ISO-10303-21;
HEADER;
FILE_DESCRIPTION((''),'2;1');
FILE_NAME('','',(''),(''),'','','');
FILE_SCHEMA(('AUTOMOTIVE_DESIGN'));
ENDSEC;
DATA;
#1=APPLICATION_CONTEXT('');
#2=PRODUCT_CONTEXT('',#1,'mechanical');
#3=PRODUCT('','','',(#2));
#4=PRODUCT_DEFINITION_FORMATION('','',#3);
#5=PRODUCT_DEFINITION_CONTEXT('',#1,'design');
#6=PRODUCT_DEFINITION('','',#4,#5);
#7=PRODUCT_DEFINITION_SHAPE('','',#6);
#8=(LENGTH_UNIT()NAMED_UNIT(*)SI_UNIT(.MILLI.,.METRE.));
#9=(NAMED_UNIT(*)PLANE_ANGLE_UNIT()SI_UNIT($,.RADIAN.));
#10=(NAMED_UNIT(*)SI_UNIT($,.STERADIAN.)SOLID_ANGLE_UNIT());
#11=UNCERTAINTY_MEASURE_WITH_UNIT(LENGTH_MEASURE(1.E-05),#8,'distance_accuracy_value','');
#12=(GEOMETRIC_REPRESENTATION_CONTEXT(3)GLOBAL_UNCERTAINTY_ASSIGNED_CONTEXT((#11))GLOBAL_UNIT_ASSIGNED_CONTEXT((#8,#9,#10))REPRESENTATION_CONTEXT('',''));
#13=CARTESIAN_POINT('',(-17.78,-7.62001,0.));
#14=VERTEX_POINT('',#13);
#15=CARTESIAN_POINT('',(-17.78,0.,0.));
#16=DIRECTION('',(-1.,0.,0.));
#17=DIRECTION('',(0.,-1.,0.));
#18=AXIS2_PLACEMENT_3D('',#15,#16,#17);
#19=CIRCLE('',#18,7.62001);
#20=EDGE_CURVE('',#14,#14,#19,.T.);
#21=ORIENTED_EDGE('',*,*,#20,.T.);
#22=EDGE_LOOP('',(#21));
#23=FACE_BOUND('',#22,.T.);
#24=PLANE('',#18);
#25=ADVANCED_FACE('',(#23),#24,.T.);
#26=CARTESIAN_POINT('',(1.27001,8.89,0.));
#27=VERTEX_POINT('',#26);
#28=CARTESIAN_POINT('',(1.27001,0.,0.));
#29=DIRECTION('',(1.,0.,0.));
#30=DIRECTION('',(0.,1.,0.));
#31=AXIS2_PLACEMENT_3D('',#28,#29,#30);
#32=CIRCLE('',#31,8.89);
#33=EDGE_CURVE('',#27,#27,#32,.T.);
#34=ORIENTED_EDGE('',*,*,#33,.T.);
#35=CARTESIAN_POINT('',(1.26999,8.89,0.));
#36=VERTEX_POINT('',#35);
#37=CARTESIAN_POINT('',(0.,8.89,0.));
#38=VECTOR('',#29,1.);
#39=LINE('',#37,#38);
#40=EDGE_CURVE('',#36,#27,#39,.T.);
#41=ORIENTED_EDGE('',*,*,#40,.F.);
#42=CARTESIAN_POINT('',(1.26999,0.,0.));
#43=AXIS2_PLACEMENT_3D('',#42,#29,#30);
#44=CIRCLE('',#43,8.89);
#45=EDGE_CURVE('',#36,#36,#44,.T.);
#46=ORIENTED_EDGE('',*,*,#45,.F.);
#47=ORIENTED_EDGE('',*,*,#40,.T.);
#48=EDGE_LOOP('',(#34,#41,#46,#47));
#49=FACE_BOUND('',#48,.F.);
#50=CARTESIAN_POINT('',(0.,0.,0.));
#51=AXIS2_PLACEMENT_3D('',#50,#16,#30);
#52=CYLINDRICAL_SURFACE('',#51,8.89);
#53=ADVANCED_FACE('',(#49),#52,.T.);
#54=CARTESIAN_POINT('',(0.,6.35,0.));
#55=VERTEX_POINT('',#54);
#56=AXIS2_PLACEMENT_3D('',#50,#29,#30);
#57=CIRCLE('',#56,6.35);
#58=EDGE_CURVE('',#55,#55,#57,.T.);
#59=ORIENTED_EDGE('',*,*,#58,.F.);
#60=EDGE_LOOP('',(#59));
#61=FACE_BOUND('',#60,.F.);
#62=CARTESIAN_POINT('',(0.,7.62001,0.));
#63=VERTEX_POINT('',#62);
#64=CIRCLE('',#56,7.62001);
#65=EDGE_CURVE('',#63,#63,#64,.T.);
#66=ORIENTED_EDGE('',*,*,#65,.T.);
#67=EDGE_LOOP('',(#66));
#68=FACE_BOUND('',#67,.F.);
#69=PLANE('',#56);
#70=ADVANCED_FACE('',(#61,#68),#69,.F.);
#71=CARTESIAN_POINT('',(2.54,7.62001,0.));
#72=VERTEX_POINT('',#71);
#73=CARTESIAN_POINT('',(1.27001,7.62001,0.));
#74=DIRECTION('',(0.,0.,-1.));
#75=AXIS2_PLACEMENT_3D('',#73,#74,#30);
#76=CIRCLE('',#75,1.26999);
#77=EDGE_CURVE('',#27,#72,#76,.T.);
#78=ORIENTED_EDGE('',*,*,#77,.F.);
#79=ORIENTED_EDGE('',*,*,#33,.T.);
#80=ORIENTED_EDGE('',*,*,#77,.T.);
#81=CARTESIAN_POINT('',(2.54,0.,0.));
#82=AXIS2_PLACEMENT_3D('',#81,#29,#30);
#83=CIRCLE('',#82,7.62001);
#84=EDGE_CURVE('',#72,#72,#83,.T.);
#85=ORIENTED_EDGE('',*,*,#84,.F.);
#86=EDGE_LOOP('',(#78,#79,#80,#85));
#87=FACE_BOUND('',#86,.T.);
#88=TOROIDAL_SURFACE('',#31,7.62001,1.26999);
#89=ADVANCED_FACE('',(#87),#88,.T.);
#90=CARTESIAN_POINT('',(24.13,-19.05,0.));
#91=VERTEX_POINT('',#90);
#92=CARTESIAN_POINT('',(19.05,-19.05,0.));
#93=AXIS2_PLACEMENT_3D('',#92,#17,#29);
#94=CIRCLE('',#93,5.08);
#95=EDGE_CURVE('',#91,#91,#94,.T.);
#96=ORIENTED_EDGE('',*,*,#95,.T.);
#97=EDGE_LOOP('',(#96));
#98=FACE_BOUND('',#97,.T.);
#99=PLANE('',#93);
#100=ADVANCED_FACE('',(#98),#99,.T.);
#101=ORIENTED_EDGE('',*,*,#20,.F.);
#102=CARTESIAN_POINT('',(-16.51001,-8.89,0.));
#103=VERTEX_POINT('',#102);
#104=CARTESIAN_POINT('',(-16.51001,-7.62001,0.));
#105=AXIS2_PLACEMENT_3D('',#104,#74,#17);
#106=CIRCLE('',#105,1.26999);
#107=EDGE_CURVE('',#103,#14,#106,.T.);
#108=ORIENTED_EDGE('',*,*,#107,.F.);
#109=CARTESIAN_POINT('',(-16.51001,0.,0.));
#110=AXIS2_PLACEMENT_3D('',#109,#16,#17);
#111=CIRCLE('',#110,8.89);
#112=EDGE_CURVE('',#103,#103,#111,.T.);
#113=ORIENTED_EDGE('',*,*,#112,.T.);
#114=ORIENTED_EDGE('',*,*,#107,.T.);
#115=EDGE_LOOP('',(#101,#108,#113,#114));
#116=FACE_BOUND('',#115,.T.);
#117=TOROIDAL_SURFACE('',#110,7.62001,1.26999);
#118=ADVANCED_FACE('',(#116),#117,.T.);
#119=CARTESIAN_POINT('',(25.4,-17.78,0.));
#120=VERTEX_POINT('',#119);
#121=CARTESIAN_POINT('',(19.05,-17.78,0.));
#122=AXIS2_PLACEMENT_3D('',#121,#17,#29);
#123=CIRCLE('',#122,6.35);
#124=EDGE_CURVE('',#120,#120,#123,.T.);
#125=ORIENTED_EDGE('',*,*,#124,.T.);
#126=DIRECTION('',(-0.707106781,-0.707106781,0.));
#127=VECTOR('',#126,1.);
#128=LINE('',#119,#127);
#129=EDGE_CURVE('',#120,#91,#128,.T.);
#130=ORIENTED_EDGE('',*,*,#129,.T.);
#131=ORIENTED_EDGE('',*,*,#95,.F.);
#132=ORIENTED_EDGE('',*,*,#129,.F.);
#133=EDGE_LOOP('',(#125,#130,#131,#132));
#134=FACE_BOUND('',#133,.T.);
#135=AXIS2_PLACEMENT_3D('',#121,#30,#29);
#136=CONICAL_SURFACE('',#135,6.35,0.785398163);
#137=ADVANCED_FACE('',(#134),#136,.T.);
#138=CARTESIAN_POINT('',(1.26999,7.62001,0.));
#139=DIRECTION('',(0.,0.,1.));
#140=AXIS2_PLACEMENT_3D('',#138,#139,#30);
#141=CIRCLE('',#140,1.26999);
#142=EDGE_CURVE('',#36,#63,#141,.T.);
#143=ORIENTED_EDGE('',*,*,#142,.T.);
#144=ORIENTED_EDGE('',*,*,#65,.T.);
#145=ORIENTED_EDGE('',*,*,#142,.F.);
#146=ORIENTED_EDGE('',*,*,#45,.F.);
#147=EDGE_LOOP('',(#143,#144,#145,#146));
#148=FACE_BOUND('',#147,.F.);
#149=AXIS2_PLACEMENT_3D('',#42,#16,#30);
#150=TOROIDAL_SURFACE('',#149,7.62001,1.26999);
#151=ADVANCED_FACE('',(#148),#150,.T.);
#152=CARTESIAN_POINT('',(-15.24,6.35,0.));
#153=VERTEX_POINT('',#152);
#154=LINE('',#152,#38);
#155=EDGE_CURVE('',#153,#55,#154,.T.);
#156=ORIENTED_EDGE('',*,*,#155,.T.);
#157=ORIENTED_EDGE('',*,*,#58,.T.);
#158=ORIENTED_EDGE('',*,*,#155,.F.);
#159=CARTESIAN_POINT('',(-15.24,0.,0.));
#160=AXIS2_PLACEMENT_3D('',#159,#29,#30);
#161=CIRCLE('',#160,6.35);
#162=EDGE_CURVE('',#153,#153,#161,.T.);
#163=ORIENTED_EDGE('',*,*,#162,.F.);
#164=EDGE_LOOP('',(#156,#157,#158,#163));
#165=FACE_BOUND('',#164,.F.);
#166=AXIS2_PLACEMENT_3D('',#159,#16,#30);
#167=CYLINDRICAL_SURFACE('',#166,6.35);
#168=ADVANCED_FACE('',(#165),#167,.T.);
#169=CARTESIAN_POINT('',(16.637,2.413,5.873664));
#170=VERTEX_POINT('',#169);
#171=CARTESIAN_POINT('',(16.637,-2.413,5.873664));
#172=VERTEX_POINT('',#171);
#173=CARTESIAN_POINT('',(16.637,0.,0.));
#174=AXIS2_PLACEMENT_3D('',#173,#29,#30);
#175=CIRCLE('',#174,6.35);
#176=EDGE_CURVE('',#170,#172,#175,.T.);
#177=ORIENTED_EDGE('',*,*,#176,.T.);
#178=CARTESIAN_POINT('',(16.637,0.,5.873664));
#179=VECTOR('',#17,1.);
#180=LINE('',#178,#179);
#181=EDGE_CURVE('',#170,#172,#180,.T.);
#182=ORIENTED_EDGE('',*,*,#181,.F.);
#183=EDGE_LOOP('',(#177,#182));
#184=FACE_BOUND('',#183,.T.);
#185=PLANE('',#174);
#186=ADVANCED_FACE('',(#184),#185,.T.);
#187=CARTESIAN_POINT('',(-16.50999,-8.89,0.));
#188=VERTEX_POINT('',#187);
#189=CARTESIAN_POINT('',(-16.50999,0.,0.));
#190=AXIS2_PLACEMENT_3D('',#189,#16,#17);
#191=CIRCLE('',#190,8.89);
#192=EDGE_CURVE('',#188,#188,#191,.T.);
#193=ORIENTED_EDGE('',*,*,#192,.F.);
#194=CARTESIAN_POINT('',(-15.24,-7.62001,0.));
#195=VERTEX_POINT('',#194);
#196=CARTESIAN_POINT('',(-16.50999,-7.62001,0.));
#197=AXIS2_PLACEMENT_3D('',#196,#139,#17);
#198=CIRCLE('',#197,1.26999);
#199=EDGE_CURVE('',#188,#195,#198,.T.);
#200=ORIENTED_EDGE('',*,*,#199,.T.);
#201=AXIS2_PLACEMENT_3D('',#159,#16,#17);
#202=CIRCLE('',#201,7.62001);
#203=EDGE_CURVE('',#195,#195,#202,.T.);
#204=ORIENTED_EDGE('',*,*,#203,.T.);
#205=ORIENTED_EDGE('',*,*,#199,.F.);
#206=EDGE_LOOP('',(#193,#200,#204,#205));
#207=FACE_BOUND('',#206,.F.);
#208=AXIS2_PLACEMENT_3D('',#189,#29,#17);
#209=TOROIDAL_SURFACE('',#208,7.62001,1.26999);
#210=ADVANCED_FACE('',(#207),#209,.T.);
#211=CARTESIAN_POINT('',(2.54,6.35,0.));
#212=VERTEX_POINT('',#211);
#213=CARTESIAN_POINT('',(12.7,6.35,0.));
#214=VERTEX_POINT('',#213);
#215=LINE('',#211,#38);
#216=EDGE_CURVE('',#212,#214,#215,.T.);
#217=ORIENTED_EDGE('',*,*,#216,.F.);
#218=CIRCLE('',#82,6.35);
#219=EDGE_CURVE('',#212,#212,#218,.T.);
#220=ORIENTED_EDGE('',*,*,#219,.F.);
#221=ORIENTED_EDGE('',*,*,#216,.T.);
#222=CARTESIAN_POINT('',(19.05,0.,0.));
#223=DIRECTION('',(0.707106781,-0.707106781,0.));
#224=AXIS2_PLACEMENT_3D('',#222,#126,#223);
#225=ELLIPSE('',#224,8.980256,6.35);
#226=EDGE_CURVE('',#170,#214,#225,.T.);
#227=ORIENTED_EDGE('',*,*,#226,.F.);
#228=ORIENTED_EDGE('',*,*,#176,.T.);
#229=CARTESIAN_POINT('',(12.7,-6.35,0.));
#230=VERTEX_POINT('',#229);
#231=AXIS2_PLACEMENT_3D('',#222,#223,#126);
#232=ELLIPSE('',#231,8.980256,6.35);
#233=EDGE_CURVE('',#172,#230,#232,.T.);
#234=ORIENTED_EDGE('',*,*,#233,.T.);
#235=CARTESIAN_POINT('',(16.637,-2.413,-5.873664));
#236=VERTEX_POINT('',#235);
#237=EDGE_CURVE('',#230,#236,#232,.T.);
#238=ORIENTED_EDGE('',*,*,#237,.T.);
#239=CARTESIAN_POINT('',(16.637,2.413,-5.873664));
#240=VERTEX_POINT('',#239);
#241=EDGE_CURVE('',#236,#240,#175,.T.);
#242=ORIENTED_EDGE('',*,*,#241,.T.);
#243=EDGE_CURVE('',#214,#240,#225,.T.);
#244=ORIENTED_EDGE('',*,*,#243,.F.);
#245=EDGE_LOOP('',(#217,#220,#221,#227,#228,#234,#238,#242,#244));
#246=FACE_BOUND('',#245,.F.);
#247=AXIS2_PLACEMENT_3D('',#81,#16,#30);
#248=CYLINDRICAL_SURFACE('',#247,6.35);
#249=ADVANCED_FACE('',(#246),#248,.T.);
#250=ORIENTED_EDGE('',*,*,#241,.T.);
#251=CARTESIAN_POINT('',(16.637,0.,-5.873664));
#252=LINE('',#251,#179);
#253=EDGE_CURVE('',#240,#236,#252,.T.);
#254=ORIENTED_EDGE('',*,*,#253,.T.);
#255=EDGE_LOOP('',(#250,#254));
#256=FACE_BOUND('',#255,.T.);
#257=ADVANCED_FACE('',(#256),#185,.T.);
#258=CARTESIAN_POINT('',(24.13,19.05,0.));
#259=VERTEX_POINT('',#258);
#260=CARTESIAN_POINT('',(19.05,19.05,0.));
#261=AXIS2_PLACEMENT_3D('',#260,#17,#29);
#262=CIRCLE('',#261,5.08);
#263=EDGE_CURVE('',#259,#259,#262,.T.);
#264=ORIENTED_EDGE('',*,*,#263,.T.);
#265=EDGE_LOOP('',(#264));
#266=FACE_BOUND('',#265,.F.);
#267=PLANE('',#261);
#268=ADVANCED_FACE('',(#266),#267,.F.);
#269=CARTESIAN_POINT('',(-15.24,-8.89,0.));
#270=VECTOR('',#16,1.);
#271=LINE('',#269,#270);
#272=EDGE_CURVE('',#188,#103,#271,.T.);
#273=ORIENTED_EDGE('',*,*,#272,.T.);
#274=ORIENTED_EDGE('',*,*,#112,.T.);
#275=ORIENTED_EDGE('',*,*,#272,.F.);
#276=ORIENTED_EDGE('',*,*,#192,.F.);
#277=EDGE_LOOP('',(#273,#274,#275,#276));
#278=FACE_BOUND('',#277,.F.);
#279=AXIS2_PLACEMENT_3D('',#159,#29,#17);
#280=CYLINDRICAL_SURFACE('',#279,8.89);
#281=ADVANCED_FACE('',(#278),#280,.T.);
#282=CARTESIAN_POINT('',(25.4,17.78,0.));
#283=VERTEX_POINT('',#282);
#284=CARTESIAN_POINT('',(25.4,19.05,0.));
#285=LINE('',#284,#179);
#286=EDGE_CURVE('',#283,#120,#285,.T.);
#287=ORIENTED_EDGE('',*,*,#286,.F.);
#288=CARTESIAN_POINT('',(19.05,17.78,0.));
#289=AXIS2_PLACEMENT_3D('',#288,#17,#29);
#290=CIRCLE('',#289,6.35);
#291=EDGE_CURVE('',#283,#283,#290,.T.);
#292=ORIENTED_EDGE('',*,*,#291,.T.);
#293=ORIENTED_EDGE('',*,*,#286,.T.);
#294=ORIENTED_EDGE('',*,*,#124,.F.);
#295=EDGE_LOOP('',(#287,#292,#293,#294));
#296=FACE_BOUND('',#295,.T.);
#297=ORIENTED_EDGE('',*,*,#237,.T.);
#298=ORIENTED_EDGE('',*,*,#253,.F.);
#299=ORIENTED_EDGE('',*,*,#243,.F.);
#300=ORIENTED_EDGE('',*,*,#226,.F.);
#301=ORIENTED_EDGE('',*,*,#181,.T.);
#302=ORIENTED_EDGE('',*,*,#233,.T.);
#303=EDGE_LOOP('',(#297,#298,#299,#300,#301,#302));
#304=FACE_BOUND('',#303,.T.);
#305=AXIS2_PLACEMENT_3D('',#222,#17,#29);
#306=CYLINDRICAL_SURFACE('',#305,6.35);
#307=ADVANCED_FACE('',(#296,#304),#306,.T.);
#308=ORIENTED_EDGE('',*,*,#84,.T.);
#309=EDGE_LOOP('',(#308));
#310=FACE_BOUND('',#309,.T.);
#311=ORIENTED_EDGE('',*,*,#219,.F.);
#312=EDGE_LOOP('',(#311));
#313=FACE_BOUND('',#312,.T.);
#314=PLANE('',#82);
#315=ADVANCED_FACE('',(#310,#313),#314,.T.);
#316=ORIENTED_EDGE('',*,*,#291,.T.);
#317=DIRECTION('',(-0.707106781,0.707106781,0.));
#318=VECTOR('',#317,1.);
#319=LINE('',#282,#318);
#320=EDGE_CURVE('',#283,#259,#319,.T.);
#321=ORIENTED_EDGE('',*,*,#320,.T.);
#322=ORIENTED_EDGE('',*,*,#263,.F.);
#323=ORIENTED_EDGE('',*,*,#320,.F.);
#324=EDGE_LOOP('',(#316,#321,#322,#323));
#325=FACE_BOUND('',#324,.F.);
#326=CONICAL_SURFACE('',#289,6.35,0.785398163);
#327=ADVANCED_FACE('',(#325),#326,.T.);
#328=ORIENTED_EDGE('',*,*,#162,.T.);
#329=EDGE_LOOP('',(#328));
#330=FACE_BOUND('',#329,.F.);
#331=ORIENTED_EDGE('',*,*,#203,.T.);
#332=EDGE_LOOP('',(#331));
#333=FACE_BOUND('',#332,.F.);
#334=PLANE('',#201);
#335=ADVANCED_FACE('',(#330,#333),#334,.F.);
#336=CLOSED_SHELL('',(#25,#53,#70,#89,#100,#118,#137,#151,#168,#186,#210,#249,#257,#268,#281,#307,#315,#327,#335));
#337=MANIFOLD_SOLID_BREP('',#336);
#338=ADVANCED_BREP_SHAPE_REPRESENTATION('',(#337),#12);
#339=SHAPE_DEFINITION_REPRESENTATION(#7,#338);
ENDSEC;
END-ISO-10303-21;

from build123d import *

# Parameters (mm, degrees)
F0_R      = 6.35
F1_DEPTH  = 15.24
F2_R      = 8.89
F3_DEPTH  = 2.54
F4_R      = 1.26999
F5_R      = 8.89
F6_DEPTH  = 2.54
F7_R      = 1.26999
F8_R      = 6.35
F9_DEPTH  = 19.05
F10_R     = 6.35
F11_DEPTH = 14.097
F12_SIZE  = 1.27


# Not quite as in the source:
# - a fillet or chamfer is up to 0.001 mm smaller than in the source, because OpenCascade refuses the exact size


with BuildPart() as f1:
    # F0 (on Right) → F1 (new body)
    with BuildSketch(Plane.YZ):
        with Locations((0, 182.4067449291)):
            Circle(F0_R)
    extrude(amount=F1_DEPTH)

    # F2 (on face) → F3 (join)
    with BuildSketch(Plane(origin=(0, 0, 0), x_dir=(0, -1, 0), z_dir=(-1, 0, 0))):
        with Locations((0, 182.4067449291)):
            Circle(F2_R)
    extrude(amount=F3_DEPTH)

    # F4 (radius 1.27 in the source; OpenCascade refuses exactly that, so slightly less here)
    f4_edges = [f1.edges().sort_by_distance(p)[0] for p in [
        (-1.27, -8.89, 182.406745),
        (0, 8.89, 182.406745),
        (-2.54, 8.89, 182.406745),
    ]]
    fillet(f4_edges, radius=F4_R)

    # F5 (on face) → F6 (join)
    with BuildSketch(Plane.YZ.offset(15.24)):
        with Locations((0, 182.4067449291)):
            Circle(F5_R)
    extrude(amount=F6_DEPTH)

    # F7 (radius 1.27 in the source; OpenCascade refuses exactly that, so slightly less here)
    f7_edges = [f1.edges().sort_by_distance(p)[0] for p in [
        (16.51, 8.89, 182.406745),
        (15.24, -8.89, 182.406745),
        (17.78, -8.89, 182.406745),
    ]]
    fillet(f7_edges, radius=F7_R)



with BuildPart() as f9:
    # F8 (on Front) → F9 (new body, symmetric)
    with BuildSketch(Plane.XZ):
        with Locations((34.29, 182.4067449291)):
            Circle(F8_R)
    extrude(amount=F9_DEPTH, both=True)


with BuildPart() as f1_1:
    add(f1.part)

    add(f9.part)  # F11 merges F9
    # F10 (on face) → F11 (join)
    with BuildSketch(Plane.YZ.offset(17.78)):
        with Locations((0, 182.4067449291)):
            Circle(F10_R)
    extrude(amount=F11_DEPTH)

    # F12
    f12_edges = [f1_1.edges().sort_by_distance(p)[0] for p in [
        (27.94, -19.05, 182.406745),
        (27.94, 19.05, 182.406745),
    ]]
    chamfer(f12_edges, length=F12_SIZE)


with BuildPart() as f1_2:
    # F14: moved
    add(f1_1.part.moved(Location((-15.24, 0, -182.4067449291))))


solid = f1_2.part
